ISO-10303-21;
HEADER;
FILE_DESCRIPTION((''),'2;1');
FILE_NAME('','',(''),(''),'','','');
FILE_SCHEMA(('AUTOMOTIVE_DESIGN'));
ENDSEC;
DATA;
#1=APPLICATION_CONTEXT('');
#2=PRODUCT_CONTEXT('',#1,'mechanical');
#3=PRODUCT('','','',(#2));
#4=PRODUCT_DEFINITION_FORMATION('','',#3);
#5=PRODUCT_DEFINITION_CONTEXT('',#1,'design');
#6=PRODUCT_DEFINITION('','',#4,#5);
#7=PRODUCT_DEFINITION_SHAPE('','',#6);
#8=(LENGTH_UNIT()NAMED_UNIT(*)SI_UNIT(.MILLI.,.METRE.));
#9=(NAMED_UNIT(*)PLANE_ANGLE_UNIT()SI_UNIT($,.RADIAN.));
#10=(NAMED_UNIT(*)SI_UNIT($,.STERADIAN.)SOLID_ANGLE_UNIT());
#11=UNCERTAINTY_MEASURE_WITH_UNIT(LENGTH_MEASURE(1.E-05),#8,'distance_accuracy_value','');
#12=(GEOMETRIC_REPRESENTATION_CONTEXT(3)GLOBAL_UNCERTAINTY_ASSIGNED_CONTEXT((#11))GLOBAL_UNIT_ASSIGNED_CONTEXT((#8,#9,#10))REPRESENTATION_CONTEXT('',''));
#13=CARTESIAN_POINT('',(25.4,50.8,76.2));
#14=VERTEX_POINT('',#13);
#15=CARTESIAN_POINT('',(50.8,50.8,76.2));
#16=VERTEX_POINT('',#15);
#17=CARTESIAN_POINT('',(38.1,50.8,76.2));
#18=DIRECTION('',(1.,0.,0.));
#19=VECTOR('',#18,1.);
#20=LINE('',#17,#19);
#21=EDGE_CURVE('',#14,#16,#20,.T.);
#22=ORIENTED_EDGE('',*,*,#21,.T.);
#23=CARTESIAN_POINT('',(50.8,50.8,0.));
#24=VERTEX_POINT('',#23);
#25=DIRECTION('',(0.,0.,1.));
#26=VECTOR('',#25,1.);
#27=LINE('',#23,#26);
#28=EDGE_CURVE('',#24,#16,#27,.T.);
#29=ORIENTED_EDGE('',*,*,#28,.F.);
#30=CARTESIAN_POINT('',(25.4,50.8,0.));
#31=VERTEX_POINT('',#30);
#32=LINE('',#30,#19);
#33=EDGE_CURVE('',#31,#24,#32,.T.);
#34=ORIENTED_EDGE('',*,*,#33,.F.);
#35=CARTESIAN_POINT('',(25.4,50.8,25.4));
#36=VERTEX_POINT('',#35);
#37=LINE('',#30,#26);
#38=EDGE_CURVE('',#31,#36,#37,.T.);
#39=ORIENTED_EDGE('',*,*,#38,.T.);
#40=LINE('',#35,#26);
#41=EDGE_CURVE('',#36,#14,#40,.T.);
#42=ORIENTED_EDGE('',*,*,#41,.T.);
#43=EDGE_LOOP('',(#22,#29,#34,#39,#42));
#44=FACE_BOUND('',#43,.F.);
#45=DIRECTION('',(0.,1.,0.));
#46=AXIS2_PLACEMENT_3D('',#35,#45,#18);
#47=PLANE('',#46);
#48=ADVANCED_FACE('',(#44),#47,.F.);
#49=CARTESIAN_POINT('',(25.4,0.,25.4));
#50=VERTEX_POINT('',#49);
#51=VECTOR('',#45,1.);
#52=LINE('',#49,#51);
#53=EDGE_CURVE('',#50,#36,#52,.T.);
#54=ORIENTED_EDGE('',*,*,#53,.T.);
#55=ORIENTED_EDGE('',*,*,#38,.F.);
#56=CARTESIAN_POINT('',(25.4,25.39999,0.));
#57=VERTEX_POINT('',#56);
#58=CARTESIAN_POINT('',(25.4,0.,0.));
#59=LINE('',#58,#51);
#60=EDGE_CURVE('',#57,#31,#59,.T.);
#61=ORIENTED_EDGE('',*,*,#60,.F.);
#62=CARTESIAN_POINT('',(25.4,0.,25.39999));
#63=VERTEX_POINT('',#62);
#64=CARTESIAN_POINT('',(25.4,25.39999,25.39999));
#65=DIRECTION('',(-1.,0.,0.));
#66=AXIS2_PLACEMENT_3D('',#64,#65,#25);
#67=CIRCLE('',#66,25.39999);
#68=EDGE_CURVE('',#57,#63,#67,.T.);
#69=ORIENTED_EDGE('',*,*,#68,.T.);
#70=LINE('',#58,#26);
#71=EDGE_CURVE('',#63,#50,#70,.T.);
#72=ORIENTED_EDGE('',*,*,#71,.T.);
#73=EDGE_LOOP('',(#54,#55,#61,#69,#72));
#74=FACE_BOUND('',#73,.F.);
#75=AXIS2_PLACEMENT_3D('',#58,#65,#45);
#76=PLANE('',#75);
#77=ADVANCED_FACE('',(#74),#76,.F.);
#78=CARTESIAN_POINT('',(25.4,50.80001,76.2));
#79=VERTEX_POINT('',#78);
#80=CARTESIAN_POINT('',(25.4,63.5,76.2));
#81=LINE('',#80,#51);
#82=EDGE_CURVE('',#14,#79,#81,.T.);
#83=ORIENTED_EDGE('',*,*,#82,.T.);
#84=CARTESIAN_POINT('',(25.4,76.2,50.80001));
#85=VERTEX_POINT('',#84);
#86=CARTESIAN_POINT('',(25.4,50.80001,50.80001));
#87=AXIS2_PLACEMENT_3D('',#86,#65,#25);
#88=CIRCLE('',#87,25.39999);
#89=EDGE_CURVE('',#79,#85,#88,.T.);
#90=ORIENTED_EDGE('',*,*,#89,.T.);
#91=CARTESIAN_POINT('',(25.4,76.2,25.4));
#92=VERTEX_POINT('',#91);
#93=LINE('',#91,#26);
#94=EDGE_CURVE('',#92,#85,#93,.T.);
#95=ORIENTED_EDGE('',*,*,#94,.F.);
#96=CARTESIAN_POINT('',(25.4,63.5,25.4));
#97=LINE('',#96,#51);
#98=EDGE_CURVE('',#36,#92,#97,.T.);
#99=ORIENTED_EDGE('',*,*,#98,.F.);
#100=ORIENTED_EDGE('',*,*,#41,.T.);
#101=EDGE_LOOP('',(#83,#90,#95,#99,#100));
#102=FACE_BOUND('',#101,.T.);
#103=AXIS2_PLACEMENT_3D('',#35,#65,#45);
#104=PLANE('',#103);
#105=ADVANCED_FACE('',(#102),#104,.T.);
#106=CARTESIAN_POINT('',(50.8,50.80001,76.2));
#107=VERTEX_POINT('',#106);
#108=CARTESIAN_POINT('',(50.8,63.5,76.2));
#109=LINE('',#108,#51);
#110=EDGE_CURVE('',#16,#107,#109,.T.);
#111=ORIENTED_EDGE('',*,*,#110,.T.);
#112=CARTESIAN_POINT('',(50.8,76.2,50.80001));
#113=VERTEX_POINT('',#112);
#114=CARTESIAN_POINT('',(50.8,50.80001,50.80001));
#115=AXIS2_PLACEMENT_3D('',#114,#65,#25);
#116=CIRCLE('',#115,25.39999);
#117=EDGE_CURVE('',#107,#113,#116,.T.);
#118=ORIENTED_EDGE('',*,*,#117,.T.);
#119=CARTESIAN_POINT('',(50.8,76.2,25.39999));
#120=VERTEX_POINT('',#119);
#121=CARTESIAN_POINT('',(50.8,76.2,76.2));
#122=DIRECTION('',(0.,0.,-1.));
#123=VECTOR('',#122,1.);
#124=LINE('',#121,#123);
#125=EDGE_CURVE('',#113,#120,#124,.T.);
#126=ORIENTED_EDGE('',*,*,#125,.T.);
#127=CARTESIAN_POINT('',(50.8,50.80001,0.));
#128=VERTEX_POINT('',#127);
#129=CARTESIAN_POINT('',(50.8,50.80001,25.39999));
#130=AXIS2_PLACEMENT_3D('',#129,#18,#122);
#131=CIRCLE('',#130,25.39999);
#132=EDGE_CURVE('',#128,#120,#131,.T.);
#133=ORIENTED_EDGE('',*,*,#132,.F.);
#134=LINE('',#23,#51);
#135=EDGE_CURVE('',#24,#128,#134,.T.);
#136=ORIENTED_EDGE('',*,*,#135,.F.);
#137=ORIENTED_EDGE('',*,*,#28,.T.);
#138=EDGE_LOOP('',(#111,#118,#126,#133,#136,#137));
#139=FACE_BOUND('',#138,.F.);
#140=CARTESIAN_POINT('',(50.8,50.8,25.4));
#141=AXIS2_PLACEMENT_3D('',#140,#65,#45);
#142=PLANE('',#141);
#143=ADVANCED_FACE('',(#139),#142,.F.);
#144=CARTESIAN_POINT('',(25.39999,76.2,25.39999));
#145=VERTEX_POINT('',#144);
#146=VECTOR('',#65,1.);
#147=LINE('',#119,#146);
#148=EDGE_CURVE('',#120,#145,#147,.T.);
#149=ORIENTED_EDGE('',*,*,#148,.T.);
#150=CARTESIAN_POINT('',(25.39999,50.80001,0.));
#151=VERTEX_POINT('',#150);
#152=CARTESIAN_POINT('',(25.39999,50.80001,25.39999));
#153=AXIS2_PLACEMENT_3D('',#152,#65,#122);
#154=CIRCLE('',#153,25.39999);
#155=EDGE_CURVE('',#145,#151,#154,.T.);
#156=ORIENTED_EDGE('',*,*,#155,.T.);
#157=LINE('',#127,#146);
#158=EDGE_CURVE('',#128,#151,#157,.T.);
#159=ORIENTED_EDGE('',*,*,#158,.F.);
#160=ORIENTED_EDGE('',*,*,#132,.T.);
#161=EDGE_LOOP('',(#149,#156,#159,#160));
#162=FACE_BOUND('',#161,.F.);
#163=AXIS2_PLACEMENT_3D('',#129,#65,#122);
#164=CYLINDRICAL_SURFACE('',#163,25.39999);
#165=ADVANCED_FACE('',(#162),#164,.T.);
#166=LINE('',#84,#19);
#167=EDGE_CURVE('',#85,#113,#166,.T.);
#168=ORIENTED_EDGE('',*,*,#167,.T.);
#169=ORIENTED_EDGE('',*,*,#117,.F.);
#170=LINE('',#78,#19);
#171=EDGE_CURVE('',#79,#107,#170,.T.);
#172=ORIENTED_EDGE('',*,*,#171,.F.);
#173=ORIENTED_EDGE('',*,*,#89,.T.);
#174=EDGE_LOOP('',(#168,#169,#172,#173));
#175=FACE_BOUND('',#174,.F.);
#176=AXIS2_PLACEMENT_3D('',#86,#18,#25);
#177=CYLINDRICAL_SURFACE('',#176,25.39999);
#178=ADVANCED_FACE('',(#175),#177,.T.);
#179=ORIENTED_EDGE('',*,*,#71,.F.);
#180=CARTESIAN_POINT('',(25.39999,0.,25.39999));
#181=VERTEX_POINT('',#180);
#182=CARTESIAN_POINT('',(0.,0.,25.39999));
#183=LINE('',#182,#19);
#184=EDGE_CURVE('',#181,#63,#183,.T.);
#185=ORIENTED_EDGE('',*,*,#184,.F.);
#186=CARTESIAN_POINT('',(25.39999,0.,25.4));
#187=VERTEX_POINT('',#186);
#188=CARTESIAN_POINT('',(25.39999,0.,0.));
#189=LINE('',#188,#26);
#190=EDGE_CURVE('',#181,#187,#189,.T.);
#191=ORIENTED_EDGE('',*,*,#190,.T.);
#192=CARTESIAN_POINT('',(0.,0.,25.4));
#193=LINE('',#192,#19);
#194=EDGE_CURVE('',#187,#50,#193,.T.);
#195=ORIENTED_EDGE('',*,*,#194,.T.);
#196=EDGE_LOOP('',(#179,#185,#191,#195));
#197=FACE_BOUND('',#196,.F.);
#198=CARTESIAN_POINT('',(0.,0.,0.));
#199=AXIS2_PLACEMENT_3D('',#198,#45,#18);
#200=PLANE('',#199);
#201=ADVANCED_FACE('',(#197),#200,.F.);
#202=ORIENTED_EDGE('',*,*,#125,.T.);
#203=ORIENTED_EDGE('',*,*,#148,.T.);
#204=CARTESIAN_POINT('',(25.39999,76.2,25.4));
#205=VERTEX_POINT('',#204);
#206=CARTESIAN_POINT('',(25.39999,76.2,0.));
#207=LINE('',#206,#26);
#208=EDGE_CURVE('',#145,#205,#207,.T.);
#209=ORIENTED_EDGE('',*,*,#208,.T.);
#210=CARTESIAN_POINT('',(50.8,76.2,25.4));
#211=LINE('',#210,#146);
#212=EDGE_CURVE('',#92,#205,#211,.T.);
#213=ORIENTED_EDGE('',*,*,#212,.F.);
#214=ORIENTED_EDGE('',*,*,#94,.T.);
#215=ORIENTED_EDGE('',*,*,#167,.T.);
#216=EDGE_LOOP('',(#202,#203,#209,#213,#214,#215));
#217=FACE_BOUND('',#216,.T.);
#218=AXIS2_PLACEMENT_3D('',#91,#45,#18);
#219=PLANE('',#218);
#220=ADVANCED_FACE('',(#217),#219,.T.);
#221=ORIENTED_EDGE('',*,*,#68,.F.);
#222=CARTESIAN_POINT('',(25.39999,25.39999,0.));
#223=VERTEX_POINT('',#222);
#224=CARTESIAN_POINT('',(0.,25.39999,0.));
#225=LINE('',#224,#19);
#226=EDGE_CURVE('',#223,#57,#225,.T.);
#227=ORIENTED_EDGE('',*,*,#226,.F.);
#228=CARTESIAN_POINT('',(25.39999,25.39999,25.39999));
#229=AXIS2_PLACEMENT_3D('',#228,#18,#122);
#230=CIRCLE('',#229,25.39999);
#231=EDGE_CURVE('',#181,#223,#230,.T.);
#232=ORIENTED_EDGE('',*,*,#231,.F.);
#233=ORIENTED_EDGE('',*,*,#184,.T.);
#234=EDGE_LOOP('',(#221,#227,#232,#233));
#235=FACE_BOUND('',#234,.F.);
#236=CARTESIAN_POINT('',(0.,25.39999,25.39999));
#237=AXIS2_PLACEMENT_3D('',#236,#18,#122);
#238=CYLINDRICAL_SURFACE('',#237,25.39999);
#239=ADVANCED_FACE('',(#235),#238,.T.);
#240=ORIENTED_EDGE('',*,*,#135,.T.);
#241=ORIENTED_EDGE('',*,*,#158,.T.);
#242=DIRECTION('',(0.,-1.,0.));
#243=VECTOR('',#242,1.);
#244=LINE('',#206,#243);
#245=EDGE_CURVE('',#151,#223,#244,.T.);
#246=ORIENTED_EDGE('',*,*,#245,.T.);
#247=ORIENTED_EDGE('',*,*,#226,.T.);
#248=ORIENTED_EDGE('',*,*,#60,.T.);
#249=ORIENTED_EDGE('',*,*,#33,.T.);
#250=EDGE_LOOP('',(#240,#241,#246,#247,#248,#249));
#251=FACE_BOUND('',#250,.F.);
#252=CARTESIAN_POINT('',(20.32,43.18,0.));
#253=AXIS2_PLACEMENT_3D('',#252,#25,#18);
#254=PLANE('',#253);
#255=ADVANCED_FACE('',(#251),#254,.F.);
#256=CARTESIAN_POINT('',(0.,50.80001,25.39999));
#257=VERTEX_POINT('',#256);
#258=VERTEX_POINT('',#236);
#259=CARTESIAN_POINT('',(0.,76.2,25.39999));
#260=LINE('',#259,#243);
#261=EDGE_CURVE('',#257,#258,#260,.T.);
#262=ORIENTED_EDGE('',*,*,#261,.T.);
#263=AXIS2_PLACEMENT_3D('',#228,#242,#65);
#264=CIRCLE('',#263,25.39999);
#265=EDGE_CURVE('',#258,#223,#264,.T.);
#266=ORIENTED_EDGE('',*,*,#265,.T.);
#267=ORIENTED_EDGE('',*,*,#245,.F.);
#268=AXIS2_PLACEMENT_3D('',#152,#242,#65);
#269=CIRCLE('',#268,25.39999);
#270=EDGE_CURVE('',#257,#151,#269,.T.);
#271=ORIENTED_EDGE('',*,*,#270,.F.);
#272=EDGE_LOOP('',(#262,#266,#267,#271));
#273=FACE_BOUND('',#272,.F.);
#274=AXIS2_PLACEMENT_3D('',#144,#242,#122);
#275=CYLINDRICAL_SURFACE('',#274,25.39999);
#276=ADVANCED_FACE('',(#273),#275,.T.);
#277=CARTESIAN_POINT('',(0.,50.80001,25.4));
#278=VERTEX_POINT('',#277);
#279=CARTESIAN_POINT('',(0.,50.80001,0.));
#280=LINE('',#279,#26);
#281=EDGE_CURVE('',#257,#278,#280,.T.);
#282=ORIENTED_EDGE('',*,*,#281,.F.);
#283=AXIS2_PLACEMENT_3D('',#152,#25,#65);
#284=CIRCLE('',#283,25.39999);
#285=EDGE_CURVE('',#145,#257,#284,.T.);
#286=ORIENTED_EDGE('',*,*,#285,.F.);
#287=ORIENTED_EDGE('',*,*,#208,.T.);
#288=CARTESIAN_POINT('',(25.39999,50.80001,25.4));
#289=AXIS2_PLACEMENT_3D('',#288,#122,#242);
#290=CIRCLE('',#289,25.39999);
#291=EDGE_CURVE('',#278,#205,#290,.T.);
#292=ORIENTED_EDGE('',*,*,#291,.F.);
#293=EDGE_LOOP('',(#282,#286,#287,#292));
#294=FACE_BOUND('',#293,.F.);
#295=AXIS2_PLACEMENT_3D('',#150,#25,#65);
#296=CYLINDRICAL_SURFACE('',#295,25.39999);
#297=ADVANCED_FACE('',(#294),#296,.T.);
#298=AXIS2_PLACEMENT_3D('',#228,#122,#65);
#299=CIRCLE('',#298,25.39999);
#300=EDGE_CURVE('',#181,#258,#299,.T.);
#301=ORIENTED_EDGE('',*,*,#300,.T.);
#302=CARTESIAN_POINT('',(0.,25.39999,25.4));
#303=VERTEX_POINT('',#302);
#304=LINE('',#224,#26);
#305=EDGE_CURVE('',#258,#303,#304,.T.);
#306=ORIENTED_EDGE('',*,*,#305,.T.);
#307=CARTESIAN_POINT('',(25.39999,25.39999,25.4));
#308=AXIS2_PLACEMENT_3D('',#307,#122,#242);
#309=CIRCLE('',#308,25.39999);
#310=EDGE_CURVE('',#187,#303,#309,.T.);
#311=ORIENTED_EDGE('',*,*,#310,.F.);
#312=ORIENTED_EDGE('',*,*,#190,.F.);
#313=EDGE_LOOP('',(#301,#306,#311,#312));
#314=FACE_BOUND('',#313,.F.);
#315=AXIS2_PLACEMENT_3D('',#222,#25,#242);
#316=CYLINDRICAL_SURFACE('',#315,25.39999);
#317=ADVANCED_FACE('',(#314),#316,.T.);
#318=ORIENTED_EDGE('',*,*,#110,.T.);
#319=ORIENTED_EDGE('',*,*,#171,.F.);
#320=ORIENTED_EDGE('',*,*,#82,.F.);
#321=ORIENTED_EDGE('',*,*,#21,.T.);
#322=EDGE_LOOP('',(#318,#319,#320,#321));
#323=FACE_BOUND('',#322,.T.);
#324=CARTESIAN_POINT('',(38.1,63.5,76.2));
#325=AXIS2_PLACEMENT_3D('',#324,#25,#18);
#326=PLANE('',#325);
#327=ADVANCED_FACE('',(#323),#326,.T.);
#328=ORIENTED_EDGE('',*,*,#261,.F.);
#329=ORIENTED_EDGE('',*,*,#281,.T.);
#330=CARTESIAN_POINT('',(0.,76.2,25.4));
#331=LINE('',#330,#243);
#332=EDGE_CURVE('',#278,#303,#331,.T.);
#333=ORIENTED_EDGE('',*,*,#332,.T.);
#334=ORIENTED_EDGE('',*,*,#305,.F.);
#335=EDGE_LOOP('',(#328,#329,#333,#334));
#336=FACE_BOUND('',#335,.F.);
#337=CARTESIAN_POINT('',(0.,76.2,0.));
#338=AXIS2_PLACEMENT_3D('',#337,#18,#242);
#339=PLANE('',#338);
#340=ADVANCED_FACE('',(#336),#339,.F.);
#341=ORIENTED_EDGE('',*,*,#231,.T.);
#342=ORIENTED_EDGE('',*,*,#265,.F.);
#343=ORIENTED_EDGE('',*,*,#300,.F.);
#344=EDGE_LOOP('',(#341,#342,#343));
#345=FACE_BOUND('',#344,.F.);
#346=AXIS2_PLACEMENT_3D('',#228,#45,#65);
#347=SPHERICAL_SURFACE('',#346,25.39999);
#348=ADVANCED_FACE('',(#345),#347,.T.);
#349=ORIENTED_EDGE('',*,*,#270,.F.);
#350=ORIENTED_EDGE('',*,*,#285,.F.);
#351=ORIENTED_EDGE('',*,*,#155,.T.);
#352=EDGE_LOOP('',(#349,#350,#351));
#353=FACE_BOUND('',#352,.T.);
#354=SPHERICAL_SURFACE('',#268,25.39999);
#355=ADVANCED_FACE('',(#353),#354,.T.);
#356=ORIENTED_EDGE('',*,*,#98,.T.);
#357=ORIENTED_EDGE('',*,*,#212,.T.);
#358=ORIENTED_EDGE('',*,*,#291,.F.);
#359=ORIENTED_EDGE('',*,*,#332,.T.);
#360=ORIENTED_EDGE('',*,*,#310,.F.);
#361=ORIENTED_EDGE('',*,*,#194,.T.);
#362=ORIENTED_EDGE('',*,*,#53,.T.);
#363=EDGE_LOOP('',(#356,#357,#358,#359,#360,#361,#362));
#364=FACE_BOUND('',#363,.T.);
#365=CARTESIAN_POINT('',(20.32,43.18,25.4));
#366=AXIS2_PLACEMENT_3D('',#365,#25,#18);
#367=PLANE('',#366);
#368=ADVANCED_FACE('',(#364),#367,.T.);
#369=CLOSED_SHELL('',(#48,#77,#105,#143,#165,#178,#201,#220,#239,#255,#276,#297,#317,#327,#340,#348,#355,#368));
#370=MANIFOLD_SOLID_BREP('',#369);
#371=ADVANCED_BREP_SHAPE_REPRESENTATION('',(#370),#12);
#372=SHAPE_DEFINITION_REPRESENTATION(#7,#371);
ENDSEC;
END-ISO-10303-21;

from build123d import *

# Parameters (mm, degrees)
F1_DEPTH = 25.4
F2_W     = 25.4
F2_H     = 25.4
F3_DEPTH = 50.8
F4_R     = 25.39999


# Not quite as in the source:
# - a fillet or chamfer is up to 0.001 mm smaller than in the source, because OpenCascade refuses the exact size


with BuildPart() as f1:
    # F0 (on Top) → F1 (new body)
    with BuildSketch(Plane.XY):
        Polygon((0, 76.2), (0, 0), (25.4, 0), (25.4, 50.8), (50.8, 50.8), (50.8, 76.2), align=None)
    extrude(amount=F1_DEPTH)

    # F2 (on face) → F3 (join)
    with BuildSketch(Plane.XY.offset(25.4)):
        with Locations((38.1, 63.5)):
            Rectangle(F2_W, F2_H)
    extrude(amount=F3_DEPTH)

    # F4 (radius 25.4 in the source; OpenCascade refuses exactly that, so slightly less here)
    f4_edges = [f1.edges().sort_by_distance(p)[0] for p in [
        (0, 38.1, 0),
        (0, 0, 12.7),
        (0, 76.2, 12.7),
        (25.4, 76.2, 0),
        (38.1, 76.2, 76.2),
        (12.7, 0, 0),
    ]]
    fillet(f4_edges, radius=F4_R)


solid = f1.part
